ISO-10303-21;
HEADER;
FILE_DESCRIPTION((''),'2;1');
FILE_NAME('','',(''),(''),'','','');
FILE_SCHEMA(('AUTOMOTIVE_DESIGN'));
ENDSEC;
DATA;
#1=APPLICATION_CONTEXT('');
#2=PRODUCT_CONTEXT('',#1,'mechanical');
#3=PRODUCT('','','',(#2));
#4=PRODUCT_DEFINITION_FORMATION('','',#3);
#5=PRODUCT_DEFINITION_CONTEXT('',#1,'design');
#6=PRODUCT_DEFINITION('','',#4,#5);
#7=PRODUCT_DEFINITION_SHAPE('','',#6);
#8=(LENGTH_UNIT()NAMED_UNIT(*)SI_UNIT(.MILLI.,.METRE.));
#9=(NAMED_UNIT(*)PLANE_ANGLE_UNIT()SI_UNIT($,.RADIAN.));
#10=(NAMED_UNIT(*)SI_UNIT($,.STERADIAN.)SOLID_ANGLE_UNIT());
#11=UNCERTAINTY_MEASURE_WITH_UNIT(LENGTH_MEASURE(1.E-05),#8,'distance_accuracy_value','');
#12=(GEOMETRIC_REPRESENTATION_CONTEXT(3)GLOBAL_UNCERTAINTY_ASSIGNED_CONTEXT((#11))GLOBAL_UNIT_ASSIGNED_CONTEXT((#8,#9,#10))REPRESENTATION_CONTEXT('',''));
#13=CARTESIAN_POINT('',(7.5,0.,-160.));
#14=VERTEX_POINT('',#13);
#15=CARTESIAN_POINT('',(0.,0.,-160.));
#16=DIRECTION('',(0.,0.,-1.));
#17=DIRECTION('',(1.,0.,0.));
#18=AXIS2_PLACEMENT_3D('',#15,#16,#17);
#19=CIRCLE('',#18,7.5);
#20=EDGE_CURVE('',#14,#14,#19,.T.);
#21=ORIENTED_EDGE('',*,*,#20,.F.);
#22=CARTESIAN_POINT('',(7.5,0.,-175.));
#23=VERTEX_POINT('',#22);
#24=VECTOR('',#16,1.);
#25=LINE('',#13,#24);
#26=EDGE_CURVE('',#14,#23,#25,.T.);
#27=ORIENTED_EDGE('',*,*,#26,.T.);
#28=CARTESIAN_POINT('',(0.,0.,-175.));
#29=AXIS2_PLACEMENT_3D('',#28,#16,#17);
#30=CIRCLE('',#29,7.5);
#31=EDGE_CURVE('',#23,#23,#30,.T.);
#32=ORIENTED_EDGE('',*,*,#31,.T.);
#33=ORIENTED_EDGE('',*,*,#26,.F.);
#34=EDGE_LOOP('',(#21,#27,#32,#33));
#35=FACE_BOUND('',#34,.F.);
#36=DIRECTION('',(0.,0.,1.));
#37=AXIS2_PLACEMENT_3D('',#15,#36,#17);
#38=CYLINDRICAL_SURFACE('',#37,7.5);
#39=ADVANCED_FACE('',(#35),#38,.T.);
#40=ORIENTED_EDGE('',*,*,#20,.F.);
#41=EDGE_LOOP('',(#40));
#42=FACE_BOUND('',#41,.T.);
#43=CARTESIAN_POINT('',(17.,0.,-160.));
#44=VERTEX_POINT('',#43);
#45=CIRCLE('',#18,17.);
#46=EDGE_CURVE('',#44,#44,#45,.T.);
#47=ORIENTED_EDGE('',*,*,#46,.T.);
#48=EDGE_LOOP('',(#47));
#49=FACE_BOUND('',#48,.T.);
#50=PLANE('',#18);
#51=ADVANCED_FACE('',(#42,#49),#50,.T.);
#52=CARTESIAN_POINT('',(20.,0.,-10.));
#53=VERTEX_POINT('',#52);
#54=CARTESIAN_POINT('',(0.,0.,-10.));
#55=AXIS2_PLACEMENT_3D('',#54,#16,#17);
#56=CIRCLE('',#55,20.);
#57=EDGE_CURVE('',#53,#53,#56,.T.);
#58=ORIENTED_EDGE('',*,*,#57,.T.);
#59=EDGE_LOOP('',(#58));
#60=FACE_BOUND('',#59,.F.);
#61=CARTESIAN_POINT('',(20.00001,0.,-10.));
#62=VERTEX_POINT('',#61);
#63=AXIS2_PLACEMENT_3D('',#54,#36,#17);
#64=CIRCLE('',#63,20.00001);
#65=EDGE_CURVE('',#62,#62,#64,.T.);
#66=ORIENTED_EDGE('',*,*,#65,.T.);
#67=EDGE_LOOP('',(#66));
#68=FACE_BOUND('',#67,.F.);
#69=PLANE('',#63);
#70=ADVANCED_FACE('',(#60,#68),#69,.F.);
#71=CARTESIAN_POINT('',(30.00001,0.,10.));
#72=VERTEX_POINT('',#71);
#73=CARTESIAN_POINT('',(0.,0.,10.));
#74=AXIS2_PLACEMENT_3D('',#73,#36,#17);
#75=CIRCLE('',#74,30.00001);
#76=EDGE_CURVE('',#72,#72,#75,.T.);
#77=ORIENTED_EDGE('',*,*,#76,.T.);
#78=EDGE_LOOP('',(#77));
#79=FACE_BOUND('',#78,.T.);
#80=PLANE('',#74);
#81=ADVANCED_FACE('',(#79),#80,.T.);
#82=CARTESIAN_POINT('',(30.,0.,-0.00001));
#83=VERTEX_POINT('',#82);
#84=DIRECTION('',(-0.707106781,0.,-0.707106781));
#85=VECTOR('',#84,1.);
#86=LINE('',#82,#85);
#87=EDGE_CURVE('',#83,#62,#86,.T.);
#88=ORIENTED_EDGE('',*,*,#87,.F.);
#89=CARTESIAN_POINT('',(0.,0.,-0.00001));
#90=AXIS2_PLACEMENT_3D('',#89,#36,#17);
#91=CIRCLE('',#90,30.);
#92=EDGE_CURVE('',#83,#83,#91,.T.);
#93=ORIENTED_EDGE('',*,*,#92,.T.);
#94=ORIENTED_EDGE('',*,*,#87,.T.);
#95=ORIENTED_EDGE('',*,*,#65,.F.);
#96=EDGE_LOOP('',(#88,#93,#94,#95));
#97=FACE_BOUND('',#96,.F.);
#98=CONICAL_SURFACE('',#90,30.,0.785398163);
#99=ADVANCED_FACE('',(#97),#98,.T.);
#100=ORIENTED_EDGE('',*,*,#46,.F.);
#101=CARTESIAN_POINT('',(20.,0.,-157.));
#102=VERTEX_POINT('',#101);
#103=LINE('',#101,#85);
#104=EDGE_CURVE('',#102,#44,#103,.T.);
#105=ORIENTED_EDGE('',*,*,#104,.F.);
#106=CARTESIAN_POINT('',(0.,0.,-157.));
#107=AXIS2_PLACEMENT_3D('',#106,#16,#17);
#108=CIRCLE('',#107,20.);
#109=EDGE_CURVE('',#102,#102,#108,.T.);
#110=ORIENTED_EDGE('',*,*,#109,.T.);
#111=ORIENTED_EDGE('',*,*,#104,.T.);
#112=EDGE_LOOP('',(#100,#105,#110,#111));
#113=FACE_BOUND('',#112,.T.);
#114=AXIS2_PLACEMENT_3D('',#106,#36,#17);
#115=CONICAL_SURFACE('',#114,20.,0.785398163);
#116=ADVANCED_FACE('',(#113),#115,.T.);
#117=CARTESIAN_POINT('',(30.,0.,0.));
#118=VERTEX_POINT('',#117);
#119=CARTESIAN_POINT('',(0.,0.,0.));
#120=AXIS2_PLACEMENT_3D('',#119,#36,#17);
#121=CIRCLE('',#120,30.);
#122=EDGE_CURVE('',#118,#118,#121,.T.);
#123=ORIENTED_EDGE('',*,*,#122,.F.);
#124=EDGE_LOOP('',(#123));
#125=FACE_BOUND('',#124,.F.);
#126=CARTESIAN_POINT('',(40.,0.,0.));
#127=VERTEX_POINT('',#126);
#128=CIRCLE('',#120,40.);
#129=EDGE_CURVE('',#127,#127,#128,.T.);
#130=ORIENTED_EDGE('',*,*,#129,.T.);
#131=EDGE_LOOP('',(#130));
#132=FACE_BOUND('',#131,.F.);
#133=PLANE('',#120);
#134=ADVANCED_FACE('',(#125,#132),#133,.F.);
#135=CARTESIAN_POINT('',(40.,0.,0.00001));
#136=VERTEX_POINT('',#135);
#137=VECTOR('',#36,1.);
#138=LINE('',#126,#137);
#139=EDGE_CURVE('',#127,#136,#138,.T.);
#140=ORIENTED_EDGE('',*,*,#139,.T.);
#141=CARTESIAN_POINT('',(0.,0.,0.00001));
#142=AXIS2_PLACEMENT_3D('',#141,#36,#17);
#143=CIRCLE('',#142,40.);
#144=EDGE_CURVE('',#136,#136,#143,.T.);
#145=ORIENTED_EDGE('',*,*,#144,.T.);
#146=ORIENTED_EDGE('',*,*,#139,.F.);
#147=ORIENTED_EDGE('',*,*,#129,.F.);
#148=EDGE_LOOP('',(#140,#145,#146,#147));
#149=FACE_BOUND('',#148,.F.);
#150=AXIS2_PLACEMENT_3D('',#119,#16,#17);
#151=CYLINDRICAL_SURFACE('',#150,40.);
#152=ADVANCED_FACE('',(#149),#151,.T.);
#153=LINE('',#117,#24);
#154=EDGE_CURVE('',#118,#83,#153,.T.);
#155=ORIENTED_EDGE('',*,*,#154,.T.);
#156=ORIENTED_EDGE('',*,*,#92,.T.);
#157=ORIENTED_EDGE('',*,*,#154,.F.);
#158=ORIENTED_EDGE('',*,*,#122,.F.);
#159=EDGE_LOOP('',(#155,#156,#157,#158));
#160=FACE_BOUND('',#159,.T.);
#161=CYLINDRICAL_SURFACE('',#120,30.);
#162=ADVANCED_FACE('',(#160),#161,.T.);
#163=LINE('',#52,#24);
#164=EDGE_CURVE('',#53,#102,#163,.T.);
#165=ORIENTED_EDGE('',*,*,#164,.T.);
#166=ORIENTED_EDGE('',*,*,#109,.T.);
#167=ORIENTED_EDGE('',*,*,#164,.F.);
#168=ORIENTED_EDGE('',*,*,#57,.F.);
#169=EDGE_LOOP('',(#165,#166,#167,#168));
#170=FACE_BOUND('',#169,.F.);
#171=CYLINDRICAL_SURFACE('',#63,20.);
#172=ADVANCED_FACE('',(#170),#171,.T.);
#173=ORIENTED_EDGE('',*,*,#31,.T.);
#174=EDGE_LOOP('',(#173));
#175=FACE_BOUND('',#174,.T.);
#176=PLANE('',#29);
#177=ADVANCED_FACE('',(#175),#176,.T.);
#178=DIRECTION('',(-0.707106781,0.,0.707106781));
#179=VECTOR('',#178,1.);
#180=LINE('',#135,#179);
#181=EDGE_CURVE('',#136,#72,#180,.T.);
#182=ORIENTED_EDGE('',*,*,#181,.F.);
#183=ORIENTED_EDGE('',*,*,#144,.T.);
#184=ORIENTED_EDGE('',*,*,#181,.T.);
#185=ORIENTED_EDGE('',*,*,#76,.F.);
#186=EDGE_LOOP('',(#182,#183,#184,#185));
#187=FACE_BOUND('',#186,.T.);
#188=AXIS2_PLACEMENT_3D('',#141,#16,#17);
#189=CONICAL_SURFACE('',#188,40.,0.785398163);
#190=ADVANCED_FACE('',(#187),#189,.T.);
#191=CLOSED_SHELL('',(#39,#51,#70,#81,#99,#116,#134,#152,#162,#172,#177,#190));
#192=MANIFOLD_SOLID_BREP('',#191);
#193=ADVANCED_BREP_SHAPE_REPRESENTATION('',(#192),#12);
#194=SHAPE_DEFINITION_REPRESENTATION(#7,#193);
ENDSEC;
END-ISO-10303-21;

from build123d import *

# Parameters (mm, degrees)
F0_R     = 40
F1_DEPTH = 10
F2_R     = 30
F3_DEPTH = 10
F4_R     = 20
F5_DEPTH = 150
F6_R     = 7.5
F7_DEPTH = 15
F8_SIZE2 = 9.99999
F8_SIZE  = 9.99999
F9_SIZE  = 9.99999
F10_SIZE = 3


# Not quite as in the source:
# - a fillet or chamfer is up to 0.001 mm smaller than in the source, because OpenCascade refuses the exact size


with BuildPart() as f1:
    # F0 (on Top) → F1 (new body)
    with BuildSketch(Plane.XY):
        Circle(F0_R)
    extrude(amount=F1_DEPTH)

    # F2 (on Top) → F3 (join)
    with BuildSketch(Plane.XY):
        Circle(F2_R)
    extrude(amount=-F3_DEPTH)

    # F4 (on face) → F5 (join)
    with BuildSketch(Plane(origin=(0, 0, -10), x_dir=(1, 0, 0), z_dir=(0, 0, -1))):
        Circle(F4_R)
    extrude(amount=F5_DEPTH)

    # F6 (on face) → F7 (join)
    with BuildSketch(Plane(origin=(0, 0, -160), x_dir=(1, 0, 0), z_dir=(0, 0, -1))):
        Circle(F6_R)
    extrude(amount=F7_DEPTH)

    # F8 (size 10 and 10 in the source; OpenCascade refuses exactly that, so slightly less here)
    f8_edges = [f1.edges().sort_by_distance(p)[0] for p in [
        (-40, 0, 10),
    ]]
    chamfer(f8_edges, length=F8_SIZE, length2=F8_SIZE2)

    # F9 (size 10 in the source; OpenCascade refuses exactly that, so slightly less here)
    f9_edges = [f1.edges().sort_by_distance(p)[0] for p in [
        (-30, 0, -10),
    ]]
    chamfer(f9_edges, length=F9_SIZE)

    # F10
    f10_edges = [f1.edges().sort_by_distance(p)[0] for p in [
        (-20, 0, -160),
    ]]
    chamfer(f10_edges, length=F10_SIZE)


solid = f1.part
